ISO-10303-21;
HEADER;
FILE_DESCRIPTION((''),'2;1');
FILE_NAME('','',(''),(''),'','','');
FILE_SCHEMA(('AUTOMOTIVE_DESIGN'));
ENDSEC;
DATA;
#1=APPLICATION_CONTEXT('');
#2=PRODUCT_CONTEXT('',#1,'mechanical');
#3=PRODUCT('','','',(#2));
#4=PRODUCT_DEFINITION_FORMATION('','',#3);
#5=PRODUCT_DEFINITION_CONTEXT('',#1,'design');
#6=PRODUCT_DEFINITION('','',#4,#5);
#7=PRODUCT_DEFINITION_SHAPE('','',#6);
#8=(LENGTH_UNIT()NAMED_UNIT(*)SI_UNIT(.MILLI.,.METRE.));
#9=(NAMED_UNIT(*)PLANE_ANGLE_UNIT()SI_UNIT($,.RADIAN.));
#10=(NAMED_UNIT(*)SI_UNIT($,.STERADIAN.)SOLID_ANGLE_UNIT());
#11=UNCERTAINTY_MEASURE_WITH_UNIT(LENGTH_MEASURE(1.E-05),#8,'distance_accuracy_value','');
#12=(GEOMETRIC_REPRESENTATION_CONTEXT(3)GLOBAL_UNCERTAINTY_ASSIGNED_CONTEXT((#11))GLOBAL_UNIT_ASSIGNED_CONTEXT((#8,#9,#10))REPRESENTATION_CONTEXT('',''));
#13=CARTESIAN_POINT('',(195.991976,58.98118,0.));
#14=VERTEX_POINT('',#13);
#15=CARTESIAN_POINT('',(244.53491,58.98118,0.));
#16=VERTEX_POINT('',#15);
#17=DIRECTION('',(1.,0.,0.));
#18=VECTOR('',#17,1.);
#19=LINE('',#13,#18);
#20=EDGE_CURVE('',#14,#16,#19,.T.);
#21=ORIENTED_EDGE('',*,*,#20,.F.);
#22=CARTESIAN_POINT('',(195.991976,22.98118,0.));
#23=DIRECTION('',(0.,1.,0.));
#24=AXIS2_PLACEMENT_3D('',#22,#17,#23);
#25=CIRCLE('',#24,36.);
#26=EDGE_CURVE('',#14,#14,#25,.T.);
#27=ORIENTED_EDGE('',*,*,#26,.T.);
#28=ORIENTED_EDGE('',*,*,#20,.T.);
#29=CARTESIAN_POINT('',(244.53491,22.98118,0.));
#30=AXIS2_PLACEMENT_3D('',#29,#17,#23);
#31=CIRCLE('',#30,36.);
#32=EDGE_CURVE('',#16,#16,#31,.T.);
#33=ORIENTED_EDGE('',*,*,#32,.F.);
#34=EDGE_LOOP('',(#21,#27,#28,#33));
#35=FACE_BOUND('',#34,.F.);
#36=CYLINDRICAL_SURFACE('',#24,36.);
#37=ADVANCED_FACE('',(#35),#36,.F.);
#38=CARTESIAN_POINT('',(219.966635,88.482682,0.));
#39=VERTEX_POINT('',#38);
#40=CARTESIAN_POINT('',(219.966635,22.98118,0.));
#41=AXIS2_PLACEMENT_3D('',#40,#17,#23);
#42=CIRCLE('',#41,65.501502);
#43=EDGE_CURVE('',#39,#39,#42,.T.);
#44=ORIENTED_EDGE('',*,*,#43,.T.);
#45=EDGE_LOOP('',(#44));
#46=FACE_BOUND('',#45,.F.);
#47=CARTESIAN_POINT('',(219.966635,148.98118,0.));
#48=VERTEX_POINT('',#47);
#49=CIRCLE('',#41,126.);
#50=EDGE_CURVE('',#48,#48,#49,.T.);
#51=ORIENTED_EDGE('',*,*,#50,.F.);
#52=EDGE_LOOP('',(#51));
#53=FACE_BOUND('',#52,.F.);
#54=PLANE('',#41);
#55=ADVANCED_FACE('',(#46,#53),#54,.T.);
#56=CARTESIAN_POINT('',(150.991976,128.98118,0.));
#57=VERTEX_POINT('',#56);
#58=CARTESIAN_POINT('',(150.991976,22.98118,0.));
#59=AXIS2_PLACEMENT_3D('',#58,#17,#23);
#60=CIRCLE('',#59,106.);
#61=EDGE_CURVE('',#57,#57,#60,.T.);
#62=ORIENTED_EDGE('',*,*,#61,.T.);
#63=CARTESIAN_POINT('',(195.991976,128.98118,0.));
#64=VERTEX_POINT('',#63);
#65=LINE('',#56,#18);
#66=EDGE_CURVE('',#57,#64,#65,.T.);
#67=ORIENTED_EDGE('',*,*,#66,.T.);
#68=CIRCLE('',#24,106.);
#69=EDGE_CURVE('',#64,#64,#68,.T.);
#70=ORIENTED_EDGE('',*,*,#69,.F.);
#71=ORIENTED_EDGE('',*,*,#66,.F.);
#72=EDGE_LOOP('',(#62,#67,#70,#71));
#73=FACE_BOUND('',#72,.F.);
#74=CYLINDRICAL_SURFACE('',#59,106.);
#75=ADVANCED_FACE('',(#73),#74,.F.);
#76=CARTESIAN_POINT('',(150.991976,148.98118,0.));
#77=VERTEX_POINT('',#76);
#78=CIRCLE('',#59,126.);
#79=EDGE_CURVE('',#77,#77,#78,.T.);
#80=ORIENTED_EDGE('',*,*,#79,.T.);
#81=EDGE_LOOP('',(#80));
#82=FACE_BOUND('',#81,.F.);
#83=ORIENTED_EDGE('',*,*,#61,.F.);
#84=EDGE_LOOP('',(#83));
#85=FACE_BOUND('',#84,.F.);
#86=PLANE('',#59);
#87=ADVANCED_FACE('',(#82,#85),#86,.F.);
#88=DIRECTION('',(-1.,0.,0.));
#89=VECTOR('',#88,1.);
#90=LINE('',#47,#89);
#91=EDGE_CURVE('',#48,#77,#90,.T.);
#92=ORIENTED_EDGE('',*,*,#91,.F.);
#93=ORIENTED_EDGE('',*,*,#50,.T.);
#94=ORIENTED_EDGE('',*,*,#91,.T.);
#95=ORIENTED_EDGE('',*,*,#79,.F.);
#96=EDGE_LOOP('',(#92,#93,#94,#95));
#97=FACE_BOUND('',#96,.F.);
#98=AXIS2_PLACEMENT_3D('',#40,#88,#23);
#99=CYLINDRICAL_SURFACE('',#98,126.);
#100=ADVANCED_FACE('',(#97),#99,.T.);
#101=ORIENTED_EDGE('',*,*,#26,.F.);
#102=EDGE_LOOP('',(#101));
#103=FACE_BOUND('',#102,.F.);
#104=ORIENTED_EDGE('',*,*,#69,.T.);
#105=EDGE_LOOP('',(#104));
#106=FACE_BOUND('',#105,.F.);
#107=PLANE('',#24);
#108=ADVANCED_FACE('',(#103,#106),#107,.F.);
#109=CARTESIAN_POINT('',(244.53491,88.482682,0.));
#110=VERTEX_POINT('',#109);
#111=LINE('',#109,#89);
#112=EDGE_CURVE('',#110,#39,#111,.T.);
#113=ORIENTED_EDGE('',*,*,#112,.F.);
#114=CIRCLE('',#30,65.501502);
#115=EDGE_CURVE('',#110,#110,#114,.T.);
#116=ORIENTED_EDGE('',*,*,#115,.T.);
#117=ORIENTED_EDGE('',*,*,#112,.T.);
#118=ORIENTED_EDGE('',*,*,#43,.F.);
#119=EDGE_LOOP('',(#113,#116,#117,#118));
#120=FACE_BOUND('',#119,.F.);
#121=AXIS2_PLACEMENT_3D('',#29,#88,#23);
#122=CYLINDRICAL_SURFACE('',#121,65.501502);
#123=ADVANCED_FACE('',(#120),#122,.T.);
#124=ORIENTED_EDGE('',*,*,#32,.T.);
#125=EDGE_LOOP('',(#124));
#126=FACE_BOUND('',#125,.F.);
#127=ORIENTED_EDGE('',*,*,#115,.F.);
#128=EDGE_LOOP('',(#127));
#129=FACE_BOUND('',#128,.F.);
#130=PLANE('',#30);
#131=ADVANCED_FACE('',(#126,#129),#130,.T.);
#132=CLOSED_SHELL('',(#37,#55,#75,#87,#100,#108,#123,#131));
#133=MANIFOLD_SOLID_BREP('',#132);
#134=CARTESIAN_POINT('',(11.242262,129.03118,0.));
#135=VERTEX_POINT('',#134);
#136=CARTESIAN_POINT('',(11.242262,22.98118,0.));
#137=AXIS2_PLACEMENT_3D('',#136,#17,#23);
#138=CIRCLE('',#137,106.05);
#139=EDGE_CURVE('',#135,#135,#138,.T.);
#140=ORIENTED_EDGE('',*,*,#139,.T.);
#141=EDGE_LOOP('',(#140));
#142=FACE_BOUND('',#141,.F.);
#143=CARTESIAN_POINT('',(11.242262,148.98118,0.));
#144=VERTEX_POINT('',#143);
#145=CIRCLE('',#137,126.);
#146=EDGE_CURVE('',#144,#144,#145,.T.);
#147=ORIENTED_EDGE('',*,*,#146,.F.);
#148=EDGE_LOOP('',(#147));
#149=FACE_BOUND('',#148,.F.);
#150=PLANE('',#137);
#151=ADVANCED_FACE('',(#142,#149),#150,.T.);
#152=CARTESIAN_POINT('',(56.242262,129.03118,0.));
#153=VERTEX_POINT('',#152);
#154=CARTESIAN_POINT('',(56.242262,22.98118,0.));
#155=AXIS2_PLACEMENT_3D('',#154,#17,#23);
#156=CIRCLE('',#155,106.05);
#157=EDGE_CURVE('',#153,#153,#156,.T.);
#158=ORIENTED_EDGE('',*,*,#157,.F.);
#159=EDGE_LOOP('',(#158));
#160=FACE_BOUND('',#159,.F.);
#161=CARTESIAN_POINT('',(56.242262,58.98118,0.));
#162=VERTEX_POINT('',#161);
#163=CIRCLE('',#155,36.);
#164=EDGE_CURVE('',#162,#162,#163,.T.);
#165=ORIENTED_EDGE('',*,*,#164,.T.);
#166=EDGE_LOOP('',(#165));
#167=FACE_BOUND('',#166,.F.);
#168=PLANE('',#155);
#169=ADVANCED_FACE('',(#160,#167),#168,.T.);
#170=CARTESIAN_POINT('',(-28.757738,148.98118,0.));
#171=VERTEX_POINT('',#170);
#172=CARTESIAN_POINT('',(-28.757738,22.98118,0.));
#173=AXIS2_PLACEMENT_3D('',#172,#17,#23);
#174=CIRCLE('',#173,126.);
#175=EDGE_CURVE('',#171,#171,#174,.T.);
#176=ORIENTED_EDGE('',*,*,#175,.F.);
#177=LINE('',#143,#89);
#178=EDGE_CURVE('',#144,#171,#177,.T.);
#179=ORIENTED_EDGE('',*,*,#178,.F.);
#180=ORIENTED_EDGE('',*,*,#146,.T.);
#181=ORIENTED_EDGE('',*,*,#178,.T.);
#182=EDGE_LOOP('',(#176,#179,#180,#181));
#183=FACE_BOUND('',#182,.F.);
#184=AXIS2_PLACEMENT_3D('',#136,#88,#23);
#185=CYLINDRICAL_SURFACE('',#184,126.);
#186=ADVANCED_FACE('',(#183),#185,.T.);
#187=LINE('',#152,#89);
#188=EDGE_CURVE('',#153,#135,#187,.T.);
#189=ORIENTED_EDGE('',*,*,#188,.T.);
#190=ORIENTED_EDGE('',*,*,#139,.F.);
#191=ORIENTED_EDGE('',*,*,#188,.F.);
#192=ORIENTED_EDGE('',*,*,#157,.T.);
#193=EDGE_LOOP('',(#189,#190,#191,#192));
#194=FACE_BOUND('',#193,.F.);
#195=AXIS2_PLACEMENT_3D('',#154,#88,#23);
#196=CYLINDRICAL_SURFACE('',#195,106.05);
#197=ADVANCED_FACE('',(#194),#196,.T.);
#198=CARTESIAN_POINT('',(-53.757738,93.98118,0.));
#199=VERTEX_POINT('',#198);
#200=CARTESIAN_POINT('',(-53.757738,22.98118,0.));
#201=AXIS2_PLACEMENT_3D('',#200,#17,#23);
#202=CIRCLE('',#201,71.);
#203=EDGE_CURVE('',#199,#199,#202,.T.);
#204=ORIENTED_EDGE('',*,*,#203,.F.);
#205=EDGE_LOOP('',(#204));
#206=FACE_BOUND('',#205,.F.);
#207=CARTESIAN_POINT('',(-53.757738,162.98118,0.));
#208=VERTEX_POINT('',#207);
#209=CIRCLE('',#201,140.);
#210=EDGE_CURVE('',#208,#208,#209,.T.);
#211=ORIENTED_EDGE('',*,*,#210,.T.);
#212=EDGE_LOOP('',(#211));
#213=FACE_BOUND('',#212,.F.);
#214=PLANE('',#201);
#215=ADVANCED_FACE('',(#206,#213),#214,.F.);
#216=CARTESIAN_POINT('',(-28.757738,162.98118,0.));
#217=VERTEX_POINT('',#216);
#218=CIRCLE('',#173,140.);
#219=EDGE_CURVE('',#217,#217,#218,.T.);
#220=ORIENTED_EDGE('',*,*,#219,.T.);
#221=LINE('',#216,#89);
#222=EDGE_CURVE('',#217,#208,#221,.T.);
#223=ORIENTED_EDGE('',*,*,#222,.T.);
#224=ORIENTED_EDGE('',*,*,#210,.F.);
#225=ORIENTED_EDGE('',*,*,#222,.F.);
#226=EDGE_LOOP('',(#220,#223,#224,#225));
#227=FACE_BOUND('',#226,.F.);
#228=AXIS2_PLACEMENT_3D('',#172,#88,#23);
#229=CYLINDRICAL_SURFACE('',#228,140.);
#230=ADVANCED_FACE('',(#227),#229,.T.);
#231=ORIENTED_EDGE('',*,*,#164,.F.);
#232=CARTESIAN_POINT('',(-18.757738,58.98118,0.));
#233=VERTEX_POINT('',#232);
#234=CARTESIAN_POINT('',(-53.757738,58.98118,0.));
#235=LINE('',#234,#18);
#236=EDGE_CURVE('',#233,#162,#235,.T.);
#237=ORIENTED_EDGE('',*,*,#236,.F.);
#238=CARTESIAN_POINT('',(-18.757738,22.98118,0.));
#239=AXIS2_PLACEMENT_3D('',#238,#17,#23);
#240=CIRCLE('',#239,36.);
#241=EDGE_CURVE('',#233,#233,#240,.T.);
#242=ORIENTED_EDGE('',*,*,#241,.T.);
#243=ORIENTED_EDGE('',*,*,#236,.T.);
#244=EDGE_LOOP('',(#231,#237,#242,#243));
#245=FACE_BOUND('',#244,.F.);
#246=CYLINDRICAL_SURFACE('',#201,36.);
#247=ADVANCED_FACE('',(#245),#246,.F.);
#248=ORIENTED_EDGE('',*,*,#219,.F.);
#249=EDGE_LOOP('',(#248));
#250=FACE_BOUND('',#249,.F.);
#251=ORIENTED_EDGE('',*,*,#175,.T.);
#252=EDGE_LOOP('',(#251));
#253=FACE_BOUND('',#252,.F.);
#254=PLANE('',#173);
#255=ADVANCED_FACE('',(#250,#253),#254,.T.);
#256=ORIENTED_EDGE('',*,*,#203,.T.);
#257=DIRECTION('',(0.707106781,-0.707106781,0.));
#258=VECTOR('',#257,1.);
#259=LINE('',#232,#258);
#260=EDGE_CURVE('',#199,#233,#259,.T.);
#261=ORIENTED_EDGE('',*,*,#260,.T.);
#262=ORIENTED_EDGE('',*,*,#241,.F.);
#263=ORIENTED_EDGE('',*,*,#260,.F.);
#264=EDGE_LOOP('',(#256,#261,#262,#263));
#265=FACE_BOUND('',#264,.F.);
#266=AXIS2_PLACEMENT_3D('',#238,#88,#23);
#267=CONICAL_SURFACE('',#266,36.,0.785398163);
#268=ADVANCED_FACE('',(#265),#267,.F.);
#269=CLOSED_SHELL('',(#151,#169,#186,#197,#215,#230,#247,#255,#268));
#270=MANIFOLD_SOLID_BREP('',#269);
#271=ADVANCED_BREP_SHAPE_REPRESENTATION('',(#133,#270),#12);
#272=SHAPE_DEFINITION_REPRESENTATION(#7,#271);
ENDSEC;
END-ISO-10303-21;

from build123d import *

# Parameters (mm, degrees)
F3_SIZE = 35


with BuildPart() as f1:
    # F0 (on Top) → F1 (revolve)
    with BuildSketch(Plane.XY):
        Polygon((-53.757738322, 162.981180191), (-53.757738322, 58.981180191), (56.242261678, 58.981180191), (56.242261678, 109.081180191), (56.242261678, 129.031180191), (11.242261678, 129.031180191), (11.242261678, 148.981180191), (-28.757738322, 148.981180191), (-28.757738322, 162.981180191), align=None)
    revolve(axis=Axis((-73.0837285519, 22.981180191, 0), (1, 0, 0)))

    # F3
    f3_edges = [f1.edges().sort_by_distance(p)[0] for p in [
        (-53.757738, -13.01882, 0),
    ]]
    chamfer(f3_edges, length=F3_SIZE)


with BuildPart() as f2:
    # F0 (on Top) → F2 (revolve)
    with BuildSketch(Plane.XY):
        Polygon((195.9919762611, 128.981180191), (195.9919762611, 58.981180191), (219.9965119362, 58.981180191), (244.5349097252, 58.981180191), (244.5349097252, 88.4826818109), (219.966635108, 88.4826818109), (219.966635108, 128.981180191), align=None)
        Polygon((150.9919762611, 128.981180191), (195.9919762611, 128.981180191), (219.966635108, 128.981180191), (219.966635108, 148.981180191), (150.9919762611, 148.981180191), align=None)
    revolve(axis=Axis((56.242261678, 22.981180191, 0), (1, 0, 0)))


solid = Compound([f1.part, f2.part])
